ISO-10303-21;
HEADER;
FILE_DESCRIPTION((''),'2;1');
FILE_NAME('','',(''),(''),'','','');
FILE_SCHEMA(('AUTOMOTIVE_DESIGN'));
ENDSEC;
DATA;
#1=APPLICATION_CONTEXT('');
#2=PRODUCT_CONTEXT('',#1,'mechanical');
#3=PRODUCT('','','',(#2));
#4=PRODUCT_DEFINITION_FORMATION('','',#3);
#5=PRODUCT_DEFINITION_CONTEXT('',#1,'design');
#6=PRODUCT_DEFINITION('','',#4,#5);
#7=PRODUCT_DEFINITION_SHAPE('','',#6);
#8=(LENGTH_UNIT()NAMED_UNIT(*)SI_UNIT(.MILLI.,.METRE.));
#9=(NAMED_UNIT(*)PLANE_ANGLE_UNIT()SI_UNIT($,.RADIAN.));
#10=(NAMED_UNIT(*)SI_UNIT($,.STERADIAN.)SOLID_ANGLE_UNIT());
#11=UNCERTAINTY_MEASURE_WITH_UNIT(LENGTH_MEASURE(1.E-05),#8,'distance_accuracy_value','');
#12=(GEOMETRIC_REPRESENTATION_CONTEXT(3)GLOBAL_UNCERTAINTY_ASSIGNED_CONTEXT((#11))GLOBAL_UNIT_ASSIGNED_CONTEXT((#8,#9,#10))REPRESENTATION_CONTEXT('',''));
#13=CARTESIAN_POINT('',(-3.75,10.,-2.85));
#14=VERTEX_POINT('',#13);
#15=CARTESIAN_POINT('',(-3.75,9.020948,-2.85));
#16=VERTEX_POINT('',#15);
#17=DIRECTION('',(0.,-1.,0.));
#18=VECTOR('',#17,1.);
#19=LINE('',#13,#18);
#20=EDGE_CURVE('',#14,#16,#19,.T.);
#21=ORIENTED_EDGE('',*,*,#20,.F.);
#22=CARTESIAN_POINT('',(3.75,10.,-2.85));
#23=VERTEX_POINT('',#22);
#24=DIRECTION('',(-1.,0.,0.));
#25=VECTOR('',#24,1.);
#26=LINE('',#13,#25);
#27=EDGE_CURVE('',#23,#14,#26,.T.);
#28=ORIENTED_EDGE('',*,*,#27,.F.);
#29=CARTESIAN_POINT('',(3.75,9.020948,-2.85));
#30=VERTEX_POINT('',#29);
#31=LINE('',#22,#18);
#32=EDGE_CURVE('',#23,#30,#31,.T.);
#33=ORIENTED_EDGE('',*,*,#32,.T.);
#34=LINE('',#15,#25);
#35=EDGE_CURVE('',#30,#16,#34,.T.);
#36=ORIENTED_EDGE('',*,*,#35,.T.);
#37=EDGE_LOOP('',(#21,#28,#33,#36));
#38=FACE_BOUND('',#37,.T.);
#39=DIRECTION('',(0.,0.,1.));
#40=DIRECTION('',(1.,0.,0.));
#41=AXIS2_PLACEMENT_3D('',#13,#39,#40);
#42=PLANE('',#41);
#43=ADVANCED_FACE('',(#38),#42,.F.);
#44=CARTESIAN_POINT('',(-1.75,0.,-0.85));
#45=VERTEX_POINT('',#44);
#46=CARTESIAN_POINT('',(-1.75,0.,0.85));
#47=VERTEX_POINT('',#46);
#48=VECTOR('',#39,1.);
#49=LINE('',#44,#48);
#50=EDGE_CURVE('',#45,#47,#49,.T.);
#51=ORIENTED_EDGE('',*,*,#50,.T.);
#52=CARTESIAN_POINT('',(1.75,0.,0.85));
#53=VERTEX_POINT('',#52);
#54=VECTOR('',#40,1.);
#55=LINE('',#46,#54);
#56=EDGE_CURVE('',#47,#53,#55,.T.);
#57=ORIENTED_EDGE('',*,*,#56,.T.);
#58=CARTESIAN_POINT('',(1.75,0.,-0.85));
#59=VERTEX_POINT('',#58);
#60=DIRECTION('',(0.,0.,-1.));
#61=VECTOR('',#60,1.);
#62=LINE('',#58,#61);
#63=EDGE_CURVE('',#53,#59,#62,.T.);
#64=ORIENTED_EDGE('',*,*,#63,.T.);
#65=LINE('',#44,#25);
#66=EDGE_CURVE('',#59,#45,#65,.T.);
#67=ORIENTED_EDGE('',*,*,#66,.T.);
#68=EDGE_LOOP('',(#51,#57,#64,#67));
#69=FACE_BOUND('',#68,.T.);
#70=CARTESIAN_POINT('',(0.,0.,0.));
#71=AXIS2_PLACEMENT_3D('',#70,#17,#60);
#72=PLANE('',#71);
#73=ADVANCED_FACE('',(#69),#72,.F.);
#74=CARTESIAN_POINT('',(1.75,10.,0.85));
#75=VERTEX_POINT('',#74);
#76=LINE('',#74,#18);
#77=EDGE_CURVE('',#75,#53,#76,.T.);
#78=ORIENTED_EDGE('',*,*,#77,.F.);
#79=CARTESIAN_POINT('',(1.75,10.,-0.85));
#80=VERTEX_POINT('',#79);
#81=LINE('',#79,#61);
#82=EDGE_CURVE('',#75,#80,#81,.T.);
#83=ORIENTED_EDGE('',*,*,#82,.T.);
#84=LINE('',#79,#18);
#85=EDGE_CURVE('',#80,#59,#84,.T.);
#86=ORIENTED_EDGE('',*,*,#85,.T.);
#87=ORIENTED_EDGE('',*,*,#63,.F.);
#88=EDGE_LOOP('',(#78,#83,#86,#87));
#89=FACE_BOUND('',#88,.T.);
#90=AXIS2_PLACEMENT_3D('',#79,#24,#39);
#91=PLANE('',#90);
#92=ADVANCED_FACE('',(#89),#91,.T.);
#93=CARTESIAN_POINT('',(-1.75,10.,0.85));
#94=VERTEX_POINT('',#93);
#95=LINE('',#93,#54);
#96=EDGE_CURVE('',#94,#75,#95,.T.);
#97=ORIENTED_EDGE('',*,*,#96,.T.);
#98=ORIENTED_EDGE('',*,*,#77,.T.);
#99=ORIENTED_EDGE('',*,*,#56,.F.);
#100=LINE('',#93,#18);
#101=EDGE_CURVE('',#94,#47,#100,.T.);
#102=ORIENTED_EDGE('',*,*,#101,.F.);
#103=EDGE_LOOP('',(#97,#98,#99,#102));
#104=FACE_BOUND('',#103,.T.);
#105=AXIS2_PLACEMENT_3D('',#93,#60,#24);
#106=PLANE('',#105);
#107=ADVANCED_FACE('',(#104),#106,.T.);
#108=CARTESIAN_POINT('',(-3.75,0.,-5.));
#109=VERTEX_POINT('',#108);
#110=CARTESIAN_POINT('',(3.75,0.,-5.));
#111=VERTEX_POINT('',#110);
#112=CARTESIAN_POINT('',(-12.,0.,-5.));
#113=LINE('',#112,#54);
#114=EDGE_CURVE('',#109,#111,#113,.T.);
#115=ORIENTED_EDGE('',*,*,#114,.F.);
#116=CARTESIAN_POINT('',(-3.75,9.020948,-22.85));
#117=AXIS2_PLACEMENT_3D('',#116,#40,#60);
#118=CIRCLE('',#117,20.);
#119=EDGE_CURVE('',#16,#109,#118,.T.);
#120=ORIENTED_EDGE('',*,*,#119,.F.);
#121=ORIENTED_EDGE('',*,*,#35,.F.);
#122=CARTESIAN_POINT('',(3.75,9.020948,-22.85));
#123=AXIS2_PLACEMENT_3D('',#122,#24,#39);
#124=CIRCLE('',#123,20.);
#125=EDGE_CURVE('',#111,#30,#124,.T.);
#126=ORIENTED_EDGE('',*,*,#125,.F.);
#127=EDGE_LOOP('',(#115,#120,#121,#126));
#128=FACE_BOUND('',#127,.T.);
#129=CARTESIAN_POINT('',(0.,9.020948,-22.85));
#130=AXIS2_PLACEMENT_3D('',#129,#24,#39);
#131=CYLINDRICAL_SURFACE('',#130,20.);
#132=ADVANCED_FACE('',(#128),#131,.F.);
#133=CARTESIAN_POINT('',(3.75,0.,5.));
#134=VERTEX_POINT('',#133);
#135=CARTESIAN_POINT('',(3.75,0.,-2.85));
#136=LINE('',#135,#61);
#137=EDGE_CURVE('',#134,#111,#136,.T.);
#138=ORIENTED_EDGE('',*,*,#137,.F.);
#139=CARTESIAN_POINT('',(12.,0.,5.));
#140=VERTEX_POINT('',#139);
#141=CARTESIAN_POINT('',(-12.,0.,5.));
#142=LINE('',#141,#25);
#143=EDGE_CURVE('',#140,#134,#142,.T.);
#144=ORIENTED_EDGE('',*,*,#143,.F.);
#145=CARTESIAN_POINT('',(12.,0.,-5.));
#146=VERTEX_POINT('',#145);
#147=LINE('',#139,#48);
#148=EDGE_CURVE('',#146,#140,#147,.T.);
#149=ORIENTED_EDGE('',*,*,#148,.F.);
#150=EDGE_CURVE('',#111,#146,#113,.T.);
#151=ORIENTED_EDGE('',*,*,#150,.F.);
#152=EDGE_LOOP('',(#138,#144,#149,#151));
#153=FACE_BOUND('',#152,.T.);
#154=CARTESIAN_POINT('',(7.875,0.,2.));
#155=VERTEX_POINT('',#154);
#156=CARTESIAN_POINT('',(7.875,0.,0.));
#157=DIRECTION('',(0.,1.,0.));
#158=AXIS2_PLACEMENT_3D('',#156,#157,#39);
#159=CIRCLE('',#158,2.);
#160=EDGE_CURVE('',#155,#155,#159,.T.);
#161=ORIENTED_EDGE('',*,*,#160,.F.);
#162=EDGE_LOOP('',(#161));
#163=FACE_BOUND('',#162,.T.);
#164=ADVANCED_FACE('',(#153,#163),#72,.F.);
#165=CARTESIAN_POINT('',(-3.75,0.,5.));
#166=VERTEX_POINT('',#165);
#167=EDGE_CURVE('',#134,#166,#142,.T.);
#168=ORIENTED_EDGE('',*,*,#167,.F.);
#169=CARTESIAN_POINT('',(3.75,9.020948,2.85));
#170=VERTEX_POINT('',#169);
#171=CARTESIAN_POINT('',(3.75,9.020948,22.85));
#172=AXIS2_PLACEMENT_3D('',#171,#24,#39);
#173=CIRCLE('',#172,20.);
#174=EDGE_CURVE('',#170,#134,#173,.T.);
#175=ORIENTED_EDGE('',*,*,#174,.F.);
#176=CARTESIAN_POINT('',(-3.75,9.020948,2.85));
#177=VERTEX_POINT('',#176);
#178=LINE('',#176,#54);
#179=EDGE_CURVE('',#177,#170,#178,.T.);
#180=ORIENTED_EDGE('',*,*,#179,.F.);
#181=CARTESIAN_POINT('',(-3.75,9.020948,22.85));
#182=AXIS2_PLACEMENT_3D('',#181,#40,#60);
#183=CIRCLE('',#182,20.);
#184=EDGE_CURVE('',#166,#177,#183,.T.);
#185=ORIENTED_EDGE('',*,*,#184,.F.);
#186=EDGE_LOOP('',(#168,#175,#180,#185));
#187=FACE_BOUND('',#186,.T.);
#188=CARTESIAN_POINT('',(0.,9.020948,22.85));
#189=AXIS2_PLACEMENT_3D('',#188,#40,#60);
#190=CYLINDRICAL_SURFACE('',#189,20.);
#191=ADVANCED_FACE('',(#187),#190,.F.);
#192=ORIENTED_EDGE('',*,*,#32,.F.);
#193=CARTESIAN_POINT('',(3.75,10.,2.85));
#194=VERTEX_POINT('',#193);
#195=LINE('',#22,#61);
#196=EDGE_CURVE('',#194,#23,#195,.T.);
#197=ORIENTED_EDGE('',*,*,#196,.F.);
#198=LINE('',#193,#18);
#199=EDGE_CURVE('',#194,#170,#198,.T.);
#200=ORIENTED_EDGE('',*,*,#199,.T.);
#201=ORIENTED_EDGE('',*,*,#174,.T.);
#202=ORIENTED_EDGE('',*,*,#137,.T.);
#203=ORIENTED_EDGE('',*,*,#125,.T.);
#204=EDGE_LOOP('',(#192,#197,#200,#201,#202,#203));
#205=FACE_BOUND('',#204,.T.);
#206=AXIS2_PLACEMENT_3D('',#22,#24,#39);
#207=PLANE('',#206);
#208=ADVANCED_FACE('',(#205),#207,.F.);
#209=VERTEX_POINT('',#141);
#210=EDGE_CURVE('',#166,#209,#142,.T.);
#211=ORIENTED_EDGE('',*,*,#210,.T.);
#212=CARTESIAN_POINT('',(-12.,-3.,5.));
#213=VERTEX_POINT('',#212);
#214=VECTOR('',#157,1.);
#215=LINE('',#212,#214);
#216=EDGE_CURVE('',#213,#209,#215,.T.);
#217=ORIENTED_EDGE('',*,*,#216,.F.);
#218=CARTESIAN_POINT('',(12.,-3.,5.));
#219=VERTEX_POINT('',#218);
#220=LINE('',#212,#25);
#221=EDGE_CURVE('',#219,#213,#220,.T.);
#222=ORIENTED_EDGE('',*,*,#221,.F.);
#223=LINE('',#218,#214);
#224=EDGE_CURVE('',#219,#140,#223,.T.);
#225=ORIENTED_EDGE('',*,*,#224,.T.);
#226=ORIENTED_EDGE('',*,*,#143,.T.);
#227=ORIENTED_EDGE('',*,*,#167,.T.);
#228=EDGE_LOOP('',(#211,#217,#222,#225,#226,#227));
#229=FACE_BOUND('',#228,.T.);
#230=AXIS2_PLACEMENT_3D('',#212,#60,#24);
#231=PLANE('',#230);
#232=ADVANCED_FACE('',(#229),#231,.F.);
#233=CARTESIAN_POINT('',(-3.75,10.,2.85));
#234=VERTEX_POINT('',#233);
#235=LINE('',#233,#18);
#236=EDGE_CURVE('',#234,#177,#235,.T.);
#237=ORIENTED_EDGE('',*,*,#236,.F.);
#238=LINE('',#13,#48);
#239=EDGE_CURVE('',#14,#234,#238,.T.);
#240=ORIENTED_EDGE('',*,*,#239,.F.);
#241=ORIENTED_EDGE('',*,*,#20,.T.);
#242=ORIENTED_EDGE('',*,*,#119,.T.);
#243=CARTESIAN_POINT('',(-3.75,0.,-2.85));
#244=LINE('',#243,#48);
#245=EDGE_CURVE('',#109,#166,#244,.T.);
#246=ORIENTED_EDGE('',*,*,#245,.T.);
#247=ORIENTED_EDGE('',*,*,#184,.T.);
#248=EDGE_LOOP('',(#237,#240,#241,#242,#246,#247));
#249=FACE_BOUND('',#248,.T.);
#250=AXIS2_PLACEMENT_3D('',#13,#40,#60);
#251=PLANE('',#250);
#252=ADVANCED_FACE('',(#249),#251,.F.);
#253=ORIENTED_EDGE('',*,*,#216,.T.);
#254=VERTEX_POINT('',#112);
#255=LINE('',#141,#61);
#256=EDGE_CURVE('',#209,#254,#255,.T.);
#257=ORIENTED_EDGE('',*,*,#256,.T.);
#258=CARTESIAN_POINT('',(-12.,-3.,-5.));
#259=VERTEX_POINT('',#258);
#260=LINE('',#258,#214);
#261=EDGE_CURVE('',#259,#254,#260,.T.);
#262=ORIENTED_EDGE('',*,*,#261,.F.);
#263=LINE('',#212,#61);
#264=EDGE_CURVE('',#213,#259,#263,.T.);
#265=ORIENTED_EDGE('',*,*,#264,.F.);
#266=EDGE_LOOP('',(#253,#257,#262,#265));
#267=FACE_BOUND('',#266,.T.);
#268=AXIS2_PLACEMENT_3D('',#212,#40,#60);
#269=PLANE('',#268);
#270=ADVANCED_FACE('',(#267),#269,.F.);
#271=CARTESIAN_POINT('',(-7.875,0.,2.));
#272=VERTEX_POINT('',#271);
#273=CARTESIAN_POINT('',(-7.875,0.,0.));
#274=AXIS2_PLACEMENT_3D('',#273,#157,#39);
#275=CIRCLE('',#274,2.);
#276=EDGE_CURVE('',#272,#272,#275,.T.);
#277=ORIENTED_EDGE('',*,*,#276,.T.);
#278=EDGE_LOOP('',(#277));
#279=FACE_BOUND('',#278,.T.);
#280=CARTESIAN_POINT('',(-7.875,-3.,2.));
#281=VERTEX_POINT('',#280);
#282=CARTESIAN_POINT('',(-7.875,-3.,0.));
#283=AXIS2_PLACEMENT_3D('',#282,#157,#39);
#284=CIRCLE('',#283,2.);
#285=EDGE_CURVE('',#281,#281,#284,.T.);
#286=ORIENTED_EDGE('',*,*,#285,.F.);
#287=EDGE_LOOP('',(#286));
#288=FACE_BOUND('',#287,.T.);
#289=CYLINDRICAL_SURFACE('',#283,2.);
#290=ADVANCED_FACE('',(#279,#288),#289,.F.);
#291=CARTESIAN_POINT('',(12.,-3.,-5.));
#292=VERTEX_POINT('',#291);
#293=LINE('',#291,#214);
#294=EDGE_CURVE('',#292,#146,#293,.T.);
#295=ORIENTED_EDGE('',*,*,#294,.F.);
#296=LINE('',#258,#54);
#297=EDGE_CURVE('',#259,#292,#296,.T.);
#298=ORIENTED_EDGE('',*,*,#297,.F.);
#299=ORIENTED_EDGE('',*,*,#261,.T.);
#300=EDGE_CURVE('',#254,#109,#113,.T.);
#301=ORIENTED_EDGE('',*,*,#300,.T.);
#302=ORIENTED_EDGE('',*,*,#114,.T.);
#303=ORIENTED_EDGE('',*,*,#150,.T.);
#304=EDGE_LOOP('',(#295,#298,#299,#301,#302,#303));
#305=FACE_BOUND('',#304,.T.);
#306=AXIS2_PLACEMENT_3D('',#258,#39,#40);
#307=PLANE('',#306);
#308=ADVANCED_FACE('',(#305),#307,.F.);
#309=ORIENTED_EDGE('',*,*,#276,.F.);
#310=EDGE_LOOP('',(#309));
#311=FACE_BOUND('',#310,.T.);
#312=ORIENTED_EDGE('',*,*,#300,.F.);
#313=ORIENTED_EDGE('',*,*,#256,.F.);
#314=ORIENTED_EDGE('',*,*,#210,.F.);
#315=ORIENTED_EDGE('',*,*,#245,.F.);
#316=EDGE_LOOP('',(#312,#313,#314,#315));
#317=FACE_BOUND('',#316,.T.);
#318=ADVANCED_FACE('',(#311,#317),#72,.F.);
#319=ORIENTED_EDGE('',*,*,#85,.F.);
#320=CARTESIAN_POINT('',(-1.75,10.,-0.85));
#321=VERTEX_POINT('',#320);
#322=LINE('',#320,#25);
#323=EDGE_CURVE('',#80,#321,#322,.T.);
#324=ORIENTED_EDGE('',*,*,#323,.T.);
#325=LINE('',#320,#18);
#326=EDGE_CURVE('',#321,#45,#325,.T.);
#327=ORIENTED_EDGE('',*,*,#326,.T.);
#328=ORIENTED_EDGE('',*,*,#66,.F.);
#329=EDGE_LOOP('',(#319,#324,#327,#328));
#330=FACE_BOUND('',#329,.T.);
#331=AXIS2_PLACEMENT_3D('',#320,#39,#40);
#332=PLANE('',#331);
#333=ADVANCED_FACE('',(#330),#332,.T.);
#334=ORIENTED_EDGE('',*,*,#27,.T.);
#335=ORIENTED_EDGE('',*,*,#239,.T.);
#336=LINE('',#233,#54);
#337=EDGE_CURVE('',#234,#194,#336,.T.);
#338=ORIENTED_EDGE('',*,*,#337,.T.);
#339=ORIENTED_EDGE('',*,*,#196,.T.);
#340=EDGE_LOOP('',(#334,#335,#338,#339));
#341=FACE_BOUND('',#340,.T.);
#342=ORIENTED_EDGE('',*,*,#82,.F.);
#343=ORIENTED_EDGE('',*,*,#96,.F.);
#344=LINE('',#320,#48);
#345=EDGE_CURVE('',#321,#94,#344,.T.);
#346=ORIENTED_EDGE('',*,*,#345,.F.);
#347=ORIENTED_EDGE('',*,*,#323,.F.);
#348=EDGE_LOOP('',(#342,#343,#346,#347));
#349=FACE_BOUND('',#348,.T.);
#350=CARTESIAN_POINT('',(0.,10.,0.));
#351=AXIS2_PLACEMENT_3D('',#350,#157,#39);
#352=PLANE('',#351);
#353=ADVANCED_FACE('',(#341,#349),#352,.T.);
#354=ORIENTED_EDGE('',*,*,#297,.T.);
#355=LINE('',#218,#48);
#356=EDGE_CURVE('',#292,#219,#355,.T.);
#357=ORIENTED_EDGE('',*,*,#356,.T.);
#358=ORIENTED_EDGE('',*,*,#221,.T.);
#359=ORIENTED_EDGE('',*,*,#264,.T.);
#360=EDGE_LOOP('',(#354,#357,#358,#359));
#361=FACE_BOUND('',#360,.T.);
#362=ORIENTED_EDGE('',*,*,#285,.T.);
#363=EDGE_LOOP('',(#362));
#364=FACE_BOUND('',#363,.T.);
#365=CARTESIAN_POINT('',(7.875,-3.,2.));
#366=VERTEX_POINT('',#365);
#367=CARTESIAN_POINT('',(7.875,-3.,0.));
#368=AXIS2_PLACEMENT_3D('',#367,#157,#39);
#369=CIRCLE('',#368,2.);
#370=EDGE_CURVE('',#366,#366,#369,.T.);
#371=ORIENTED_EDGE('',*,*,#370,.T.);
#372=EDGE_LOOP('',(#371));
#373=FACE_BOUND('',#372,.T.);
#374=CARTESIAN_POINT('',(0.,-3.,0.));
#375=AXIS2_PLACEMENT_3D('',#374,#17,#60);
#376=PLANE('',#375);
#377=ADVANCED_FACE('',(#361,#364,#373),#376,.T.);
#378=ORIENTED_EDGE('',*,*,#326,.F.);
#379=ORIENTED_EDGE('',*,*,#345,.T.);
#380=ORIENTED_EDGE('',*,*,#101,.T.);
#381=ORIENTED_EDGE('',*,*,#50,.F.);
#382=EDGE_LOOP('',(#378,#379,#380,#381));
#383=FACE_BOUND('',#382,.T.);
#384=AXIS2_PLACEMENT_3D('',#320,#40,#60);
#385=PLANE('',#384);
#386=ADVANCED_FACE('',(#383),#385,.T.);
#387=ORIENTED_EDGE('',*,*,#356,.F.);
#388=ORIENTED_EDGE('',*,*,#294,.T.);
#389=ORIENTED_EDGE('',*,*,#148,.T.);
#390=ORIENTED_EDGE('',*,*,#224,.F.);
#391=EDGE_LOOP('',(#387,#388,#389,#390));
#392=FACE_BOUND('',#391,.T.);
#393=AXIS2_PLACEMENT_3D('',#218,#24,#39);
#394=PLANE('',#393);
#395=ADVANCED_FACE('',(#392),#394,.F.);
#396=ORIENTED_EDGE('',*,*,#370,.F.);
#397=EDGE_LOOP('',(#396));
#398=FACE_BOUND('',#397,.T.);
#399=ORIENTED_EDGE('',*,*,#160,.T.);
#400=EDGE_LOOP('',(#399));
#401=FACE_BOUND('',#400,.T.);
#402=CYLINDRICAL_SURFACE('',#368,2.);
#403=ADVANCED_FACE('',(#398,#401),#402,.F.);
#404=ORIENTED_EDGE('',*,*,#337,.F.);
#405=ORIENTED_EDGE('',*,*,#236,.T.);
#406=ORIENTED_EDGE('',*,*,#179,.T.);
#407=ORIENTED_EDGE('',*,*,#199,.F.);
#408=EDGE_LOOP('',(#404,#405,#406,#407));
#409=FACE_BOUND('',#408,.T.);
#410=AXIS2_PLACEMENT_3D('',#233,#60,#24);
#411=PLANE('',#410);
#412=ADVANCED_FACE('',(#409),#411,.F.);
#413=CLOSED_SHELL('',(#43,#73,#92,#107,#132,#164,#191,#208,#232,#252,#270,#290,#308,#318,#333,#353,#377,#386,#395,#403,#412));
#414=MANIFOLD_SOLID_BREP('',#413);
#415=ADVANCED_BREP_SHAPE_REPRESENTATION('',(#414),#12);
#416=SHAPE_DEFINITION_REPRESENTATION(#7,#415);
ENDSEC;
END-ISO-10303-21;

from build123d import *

# Parameters (mm, degrees)
SKETCH1_W           = 7.5
SKETCH1_H           = 5.7
SKETCH1_W_2         = 3.5
SKETCH1_H_2         = 1.7
BOSS_EXTRUDE1_DEPTH = 10
SKETCH2_W           = 24
SKETCH2_H           = 10
BOSS_EXTRUDE2_DEPTH = 3
FILLET1_R           = 20
SKETCH3_R           = 2
CUT_EXTRUDE1_DEPTH  = 3


with BuildPart() as part:
    # Sketch1 → Boss-Extrude1 (new body)
    with BuildSketch(Plane(origin=(0, 0, 0), x_dir=(1, 0, 0), z_dir=(0, 1, 0))):
        Rectangle(SKETCH1_W, SKETCH1_H)
        Rectangle(SKETCH1_W_2, SKETCH1_H_2, mode=Mode.SUBTRACT)
    extrude(amount=BOSS_EXTRUDE1_DEPTH)

    # Sketch2 → Boss-Extrude2 (add)
    with BuildSketch(Plane.XZ):
        Rectangle(SKETCH2_W, SKETCH2_H)
    extrude(amount=BOSS_EXTRUDE2_DEPTH)

    # Fillet1
    # the kernel refuses this fillet: 20 mm, written as the material it adds along each edge
    with BuildSketch(Plane(origin=(3.75, 0, 2.85), x_dir=(0, 0, 1), z_dir=(-1, 0, 0)), Plane(origin=(-3.75, 0, -2.85), x_dir=(0, 0, -1), z_dir=(1, 0, 0))) as fillet1_piece_1:
        with BuildLine():
            CenterArc((20, 9.020947844), FILLET1_R, 180, 26.810903424)
            Line((0, 9.020947844), (-0.4, 9.020947844))
            Line((-0.4, 9.020947844), (-0.4, 0))
            Line((-0.4, 0), (0, -0.4))
            ThreePointArc((0, -0.4), (1.075, -0.4), (1.793, -0.180418957))
            Line((1.793, -0.180418957), (2.15, 0))
        make_face()
    extrude(amount=7.5)

    # Sketch3 → Cut-Extrude1 (cut)
    with BuildSketch(Plane(origin=(0, 0, 0), x_dir=(1, 0, 0), z_dir=(0, 1, 0))):
        with Locations(Location((-7.875, 0, 0), (0, 0, 270))):
            Circle(SKETCH3_R)
        with Locations(Location((7.875, 0, 0), (0, 0, 270))):
            Circle(SKETCH3_R)
    extrude(amount=-CUT_EXTRUDE1_DEPTH, mode=Mode.SUBTRACT)


solid = part.part
